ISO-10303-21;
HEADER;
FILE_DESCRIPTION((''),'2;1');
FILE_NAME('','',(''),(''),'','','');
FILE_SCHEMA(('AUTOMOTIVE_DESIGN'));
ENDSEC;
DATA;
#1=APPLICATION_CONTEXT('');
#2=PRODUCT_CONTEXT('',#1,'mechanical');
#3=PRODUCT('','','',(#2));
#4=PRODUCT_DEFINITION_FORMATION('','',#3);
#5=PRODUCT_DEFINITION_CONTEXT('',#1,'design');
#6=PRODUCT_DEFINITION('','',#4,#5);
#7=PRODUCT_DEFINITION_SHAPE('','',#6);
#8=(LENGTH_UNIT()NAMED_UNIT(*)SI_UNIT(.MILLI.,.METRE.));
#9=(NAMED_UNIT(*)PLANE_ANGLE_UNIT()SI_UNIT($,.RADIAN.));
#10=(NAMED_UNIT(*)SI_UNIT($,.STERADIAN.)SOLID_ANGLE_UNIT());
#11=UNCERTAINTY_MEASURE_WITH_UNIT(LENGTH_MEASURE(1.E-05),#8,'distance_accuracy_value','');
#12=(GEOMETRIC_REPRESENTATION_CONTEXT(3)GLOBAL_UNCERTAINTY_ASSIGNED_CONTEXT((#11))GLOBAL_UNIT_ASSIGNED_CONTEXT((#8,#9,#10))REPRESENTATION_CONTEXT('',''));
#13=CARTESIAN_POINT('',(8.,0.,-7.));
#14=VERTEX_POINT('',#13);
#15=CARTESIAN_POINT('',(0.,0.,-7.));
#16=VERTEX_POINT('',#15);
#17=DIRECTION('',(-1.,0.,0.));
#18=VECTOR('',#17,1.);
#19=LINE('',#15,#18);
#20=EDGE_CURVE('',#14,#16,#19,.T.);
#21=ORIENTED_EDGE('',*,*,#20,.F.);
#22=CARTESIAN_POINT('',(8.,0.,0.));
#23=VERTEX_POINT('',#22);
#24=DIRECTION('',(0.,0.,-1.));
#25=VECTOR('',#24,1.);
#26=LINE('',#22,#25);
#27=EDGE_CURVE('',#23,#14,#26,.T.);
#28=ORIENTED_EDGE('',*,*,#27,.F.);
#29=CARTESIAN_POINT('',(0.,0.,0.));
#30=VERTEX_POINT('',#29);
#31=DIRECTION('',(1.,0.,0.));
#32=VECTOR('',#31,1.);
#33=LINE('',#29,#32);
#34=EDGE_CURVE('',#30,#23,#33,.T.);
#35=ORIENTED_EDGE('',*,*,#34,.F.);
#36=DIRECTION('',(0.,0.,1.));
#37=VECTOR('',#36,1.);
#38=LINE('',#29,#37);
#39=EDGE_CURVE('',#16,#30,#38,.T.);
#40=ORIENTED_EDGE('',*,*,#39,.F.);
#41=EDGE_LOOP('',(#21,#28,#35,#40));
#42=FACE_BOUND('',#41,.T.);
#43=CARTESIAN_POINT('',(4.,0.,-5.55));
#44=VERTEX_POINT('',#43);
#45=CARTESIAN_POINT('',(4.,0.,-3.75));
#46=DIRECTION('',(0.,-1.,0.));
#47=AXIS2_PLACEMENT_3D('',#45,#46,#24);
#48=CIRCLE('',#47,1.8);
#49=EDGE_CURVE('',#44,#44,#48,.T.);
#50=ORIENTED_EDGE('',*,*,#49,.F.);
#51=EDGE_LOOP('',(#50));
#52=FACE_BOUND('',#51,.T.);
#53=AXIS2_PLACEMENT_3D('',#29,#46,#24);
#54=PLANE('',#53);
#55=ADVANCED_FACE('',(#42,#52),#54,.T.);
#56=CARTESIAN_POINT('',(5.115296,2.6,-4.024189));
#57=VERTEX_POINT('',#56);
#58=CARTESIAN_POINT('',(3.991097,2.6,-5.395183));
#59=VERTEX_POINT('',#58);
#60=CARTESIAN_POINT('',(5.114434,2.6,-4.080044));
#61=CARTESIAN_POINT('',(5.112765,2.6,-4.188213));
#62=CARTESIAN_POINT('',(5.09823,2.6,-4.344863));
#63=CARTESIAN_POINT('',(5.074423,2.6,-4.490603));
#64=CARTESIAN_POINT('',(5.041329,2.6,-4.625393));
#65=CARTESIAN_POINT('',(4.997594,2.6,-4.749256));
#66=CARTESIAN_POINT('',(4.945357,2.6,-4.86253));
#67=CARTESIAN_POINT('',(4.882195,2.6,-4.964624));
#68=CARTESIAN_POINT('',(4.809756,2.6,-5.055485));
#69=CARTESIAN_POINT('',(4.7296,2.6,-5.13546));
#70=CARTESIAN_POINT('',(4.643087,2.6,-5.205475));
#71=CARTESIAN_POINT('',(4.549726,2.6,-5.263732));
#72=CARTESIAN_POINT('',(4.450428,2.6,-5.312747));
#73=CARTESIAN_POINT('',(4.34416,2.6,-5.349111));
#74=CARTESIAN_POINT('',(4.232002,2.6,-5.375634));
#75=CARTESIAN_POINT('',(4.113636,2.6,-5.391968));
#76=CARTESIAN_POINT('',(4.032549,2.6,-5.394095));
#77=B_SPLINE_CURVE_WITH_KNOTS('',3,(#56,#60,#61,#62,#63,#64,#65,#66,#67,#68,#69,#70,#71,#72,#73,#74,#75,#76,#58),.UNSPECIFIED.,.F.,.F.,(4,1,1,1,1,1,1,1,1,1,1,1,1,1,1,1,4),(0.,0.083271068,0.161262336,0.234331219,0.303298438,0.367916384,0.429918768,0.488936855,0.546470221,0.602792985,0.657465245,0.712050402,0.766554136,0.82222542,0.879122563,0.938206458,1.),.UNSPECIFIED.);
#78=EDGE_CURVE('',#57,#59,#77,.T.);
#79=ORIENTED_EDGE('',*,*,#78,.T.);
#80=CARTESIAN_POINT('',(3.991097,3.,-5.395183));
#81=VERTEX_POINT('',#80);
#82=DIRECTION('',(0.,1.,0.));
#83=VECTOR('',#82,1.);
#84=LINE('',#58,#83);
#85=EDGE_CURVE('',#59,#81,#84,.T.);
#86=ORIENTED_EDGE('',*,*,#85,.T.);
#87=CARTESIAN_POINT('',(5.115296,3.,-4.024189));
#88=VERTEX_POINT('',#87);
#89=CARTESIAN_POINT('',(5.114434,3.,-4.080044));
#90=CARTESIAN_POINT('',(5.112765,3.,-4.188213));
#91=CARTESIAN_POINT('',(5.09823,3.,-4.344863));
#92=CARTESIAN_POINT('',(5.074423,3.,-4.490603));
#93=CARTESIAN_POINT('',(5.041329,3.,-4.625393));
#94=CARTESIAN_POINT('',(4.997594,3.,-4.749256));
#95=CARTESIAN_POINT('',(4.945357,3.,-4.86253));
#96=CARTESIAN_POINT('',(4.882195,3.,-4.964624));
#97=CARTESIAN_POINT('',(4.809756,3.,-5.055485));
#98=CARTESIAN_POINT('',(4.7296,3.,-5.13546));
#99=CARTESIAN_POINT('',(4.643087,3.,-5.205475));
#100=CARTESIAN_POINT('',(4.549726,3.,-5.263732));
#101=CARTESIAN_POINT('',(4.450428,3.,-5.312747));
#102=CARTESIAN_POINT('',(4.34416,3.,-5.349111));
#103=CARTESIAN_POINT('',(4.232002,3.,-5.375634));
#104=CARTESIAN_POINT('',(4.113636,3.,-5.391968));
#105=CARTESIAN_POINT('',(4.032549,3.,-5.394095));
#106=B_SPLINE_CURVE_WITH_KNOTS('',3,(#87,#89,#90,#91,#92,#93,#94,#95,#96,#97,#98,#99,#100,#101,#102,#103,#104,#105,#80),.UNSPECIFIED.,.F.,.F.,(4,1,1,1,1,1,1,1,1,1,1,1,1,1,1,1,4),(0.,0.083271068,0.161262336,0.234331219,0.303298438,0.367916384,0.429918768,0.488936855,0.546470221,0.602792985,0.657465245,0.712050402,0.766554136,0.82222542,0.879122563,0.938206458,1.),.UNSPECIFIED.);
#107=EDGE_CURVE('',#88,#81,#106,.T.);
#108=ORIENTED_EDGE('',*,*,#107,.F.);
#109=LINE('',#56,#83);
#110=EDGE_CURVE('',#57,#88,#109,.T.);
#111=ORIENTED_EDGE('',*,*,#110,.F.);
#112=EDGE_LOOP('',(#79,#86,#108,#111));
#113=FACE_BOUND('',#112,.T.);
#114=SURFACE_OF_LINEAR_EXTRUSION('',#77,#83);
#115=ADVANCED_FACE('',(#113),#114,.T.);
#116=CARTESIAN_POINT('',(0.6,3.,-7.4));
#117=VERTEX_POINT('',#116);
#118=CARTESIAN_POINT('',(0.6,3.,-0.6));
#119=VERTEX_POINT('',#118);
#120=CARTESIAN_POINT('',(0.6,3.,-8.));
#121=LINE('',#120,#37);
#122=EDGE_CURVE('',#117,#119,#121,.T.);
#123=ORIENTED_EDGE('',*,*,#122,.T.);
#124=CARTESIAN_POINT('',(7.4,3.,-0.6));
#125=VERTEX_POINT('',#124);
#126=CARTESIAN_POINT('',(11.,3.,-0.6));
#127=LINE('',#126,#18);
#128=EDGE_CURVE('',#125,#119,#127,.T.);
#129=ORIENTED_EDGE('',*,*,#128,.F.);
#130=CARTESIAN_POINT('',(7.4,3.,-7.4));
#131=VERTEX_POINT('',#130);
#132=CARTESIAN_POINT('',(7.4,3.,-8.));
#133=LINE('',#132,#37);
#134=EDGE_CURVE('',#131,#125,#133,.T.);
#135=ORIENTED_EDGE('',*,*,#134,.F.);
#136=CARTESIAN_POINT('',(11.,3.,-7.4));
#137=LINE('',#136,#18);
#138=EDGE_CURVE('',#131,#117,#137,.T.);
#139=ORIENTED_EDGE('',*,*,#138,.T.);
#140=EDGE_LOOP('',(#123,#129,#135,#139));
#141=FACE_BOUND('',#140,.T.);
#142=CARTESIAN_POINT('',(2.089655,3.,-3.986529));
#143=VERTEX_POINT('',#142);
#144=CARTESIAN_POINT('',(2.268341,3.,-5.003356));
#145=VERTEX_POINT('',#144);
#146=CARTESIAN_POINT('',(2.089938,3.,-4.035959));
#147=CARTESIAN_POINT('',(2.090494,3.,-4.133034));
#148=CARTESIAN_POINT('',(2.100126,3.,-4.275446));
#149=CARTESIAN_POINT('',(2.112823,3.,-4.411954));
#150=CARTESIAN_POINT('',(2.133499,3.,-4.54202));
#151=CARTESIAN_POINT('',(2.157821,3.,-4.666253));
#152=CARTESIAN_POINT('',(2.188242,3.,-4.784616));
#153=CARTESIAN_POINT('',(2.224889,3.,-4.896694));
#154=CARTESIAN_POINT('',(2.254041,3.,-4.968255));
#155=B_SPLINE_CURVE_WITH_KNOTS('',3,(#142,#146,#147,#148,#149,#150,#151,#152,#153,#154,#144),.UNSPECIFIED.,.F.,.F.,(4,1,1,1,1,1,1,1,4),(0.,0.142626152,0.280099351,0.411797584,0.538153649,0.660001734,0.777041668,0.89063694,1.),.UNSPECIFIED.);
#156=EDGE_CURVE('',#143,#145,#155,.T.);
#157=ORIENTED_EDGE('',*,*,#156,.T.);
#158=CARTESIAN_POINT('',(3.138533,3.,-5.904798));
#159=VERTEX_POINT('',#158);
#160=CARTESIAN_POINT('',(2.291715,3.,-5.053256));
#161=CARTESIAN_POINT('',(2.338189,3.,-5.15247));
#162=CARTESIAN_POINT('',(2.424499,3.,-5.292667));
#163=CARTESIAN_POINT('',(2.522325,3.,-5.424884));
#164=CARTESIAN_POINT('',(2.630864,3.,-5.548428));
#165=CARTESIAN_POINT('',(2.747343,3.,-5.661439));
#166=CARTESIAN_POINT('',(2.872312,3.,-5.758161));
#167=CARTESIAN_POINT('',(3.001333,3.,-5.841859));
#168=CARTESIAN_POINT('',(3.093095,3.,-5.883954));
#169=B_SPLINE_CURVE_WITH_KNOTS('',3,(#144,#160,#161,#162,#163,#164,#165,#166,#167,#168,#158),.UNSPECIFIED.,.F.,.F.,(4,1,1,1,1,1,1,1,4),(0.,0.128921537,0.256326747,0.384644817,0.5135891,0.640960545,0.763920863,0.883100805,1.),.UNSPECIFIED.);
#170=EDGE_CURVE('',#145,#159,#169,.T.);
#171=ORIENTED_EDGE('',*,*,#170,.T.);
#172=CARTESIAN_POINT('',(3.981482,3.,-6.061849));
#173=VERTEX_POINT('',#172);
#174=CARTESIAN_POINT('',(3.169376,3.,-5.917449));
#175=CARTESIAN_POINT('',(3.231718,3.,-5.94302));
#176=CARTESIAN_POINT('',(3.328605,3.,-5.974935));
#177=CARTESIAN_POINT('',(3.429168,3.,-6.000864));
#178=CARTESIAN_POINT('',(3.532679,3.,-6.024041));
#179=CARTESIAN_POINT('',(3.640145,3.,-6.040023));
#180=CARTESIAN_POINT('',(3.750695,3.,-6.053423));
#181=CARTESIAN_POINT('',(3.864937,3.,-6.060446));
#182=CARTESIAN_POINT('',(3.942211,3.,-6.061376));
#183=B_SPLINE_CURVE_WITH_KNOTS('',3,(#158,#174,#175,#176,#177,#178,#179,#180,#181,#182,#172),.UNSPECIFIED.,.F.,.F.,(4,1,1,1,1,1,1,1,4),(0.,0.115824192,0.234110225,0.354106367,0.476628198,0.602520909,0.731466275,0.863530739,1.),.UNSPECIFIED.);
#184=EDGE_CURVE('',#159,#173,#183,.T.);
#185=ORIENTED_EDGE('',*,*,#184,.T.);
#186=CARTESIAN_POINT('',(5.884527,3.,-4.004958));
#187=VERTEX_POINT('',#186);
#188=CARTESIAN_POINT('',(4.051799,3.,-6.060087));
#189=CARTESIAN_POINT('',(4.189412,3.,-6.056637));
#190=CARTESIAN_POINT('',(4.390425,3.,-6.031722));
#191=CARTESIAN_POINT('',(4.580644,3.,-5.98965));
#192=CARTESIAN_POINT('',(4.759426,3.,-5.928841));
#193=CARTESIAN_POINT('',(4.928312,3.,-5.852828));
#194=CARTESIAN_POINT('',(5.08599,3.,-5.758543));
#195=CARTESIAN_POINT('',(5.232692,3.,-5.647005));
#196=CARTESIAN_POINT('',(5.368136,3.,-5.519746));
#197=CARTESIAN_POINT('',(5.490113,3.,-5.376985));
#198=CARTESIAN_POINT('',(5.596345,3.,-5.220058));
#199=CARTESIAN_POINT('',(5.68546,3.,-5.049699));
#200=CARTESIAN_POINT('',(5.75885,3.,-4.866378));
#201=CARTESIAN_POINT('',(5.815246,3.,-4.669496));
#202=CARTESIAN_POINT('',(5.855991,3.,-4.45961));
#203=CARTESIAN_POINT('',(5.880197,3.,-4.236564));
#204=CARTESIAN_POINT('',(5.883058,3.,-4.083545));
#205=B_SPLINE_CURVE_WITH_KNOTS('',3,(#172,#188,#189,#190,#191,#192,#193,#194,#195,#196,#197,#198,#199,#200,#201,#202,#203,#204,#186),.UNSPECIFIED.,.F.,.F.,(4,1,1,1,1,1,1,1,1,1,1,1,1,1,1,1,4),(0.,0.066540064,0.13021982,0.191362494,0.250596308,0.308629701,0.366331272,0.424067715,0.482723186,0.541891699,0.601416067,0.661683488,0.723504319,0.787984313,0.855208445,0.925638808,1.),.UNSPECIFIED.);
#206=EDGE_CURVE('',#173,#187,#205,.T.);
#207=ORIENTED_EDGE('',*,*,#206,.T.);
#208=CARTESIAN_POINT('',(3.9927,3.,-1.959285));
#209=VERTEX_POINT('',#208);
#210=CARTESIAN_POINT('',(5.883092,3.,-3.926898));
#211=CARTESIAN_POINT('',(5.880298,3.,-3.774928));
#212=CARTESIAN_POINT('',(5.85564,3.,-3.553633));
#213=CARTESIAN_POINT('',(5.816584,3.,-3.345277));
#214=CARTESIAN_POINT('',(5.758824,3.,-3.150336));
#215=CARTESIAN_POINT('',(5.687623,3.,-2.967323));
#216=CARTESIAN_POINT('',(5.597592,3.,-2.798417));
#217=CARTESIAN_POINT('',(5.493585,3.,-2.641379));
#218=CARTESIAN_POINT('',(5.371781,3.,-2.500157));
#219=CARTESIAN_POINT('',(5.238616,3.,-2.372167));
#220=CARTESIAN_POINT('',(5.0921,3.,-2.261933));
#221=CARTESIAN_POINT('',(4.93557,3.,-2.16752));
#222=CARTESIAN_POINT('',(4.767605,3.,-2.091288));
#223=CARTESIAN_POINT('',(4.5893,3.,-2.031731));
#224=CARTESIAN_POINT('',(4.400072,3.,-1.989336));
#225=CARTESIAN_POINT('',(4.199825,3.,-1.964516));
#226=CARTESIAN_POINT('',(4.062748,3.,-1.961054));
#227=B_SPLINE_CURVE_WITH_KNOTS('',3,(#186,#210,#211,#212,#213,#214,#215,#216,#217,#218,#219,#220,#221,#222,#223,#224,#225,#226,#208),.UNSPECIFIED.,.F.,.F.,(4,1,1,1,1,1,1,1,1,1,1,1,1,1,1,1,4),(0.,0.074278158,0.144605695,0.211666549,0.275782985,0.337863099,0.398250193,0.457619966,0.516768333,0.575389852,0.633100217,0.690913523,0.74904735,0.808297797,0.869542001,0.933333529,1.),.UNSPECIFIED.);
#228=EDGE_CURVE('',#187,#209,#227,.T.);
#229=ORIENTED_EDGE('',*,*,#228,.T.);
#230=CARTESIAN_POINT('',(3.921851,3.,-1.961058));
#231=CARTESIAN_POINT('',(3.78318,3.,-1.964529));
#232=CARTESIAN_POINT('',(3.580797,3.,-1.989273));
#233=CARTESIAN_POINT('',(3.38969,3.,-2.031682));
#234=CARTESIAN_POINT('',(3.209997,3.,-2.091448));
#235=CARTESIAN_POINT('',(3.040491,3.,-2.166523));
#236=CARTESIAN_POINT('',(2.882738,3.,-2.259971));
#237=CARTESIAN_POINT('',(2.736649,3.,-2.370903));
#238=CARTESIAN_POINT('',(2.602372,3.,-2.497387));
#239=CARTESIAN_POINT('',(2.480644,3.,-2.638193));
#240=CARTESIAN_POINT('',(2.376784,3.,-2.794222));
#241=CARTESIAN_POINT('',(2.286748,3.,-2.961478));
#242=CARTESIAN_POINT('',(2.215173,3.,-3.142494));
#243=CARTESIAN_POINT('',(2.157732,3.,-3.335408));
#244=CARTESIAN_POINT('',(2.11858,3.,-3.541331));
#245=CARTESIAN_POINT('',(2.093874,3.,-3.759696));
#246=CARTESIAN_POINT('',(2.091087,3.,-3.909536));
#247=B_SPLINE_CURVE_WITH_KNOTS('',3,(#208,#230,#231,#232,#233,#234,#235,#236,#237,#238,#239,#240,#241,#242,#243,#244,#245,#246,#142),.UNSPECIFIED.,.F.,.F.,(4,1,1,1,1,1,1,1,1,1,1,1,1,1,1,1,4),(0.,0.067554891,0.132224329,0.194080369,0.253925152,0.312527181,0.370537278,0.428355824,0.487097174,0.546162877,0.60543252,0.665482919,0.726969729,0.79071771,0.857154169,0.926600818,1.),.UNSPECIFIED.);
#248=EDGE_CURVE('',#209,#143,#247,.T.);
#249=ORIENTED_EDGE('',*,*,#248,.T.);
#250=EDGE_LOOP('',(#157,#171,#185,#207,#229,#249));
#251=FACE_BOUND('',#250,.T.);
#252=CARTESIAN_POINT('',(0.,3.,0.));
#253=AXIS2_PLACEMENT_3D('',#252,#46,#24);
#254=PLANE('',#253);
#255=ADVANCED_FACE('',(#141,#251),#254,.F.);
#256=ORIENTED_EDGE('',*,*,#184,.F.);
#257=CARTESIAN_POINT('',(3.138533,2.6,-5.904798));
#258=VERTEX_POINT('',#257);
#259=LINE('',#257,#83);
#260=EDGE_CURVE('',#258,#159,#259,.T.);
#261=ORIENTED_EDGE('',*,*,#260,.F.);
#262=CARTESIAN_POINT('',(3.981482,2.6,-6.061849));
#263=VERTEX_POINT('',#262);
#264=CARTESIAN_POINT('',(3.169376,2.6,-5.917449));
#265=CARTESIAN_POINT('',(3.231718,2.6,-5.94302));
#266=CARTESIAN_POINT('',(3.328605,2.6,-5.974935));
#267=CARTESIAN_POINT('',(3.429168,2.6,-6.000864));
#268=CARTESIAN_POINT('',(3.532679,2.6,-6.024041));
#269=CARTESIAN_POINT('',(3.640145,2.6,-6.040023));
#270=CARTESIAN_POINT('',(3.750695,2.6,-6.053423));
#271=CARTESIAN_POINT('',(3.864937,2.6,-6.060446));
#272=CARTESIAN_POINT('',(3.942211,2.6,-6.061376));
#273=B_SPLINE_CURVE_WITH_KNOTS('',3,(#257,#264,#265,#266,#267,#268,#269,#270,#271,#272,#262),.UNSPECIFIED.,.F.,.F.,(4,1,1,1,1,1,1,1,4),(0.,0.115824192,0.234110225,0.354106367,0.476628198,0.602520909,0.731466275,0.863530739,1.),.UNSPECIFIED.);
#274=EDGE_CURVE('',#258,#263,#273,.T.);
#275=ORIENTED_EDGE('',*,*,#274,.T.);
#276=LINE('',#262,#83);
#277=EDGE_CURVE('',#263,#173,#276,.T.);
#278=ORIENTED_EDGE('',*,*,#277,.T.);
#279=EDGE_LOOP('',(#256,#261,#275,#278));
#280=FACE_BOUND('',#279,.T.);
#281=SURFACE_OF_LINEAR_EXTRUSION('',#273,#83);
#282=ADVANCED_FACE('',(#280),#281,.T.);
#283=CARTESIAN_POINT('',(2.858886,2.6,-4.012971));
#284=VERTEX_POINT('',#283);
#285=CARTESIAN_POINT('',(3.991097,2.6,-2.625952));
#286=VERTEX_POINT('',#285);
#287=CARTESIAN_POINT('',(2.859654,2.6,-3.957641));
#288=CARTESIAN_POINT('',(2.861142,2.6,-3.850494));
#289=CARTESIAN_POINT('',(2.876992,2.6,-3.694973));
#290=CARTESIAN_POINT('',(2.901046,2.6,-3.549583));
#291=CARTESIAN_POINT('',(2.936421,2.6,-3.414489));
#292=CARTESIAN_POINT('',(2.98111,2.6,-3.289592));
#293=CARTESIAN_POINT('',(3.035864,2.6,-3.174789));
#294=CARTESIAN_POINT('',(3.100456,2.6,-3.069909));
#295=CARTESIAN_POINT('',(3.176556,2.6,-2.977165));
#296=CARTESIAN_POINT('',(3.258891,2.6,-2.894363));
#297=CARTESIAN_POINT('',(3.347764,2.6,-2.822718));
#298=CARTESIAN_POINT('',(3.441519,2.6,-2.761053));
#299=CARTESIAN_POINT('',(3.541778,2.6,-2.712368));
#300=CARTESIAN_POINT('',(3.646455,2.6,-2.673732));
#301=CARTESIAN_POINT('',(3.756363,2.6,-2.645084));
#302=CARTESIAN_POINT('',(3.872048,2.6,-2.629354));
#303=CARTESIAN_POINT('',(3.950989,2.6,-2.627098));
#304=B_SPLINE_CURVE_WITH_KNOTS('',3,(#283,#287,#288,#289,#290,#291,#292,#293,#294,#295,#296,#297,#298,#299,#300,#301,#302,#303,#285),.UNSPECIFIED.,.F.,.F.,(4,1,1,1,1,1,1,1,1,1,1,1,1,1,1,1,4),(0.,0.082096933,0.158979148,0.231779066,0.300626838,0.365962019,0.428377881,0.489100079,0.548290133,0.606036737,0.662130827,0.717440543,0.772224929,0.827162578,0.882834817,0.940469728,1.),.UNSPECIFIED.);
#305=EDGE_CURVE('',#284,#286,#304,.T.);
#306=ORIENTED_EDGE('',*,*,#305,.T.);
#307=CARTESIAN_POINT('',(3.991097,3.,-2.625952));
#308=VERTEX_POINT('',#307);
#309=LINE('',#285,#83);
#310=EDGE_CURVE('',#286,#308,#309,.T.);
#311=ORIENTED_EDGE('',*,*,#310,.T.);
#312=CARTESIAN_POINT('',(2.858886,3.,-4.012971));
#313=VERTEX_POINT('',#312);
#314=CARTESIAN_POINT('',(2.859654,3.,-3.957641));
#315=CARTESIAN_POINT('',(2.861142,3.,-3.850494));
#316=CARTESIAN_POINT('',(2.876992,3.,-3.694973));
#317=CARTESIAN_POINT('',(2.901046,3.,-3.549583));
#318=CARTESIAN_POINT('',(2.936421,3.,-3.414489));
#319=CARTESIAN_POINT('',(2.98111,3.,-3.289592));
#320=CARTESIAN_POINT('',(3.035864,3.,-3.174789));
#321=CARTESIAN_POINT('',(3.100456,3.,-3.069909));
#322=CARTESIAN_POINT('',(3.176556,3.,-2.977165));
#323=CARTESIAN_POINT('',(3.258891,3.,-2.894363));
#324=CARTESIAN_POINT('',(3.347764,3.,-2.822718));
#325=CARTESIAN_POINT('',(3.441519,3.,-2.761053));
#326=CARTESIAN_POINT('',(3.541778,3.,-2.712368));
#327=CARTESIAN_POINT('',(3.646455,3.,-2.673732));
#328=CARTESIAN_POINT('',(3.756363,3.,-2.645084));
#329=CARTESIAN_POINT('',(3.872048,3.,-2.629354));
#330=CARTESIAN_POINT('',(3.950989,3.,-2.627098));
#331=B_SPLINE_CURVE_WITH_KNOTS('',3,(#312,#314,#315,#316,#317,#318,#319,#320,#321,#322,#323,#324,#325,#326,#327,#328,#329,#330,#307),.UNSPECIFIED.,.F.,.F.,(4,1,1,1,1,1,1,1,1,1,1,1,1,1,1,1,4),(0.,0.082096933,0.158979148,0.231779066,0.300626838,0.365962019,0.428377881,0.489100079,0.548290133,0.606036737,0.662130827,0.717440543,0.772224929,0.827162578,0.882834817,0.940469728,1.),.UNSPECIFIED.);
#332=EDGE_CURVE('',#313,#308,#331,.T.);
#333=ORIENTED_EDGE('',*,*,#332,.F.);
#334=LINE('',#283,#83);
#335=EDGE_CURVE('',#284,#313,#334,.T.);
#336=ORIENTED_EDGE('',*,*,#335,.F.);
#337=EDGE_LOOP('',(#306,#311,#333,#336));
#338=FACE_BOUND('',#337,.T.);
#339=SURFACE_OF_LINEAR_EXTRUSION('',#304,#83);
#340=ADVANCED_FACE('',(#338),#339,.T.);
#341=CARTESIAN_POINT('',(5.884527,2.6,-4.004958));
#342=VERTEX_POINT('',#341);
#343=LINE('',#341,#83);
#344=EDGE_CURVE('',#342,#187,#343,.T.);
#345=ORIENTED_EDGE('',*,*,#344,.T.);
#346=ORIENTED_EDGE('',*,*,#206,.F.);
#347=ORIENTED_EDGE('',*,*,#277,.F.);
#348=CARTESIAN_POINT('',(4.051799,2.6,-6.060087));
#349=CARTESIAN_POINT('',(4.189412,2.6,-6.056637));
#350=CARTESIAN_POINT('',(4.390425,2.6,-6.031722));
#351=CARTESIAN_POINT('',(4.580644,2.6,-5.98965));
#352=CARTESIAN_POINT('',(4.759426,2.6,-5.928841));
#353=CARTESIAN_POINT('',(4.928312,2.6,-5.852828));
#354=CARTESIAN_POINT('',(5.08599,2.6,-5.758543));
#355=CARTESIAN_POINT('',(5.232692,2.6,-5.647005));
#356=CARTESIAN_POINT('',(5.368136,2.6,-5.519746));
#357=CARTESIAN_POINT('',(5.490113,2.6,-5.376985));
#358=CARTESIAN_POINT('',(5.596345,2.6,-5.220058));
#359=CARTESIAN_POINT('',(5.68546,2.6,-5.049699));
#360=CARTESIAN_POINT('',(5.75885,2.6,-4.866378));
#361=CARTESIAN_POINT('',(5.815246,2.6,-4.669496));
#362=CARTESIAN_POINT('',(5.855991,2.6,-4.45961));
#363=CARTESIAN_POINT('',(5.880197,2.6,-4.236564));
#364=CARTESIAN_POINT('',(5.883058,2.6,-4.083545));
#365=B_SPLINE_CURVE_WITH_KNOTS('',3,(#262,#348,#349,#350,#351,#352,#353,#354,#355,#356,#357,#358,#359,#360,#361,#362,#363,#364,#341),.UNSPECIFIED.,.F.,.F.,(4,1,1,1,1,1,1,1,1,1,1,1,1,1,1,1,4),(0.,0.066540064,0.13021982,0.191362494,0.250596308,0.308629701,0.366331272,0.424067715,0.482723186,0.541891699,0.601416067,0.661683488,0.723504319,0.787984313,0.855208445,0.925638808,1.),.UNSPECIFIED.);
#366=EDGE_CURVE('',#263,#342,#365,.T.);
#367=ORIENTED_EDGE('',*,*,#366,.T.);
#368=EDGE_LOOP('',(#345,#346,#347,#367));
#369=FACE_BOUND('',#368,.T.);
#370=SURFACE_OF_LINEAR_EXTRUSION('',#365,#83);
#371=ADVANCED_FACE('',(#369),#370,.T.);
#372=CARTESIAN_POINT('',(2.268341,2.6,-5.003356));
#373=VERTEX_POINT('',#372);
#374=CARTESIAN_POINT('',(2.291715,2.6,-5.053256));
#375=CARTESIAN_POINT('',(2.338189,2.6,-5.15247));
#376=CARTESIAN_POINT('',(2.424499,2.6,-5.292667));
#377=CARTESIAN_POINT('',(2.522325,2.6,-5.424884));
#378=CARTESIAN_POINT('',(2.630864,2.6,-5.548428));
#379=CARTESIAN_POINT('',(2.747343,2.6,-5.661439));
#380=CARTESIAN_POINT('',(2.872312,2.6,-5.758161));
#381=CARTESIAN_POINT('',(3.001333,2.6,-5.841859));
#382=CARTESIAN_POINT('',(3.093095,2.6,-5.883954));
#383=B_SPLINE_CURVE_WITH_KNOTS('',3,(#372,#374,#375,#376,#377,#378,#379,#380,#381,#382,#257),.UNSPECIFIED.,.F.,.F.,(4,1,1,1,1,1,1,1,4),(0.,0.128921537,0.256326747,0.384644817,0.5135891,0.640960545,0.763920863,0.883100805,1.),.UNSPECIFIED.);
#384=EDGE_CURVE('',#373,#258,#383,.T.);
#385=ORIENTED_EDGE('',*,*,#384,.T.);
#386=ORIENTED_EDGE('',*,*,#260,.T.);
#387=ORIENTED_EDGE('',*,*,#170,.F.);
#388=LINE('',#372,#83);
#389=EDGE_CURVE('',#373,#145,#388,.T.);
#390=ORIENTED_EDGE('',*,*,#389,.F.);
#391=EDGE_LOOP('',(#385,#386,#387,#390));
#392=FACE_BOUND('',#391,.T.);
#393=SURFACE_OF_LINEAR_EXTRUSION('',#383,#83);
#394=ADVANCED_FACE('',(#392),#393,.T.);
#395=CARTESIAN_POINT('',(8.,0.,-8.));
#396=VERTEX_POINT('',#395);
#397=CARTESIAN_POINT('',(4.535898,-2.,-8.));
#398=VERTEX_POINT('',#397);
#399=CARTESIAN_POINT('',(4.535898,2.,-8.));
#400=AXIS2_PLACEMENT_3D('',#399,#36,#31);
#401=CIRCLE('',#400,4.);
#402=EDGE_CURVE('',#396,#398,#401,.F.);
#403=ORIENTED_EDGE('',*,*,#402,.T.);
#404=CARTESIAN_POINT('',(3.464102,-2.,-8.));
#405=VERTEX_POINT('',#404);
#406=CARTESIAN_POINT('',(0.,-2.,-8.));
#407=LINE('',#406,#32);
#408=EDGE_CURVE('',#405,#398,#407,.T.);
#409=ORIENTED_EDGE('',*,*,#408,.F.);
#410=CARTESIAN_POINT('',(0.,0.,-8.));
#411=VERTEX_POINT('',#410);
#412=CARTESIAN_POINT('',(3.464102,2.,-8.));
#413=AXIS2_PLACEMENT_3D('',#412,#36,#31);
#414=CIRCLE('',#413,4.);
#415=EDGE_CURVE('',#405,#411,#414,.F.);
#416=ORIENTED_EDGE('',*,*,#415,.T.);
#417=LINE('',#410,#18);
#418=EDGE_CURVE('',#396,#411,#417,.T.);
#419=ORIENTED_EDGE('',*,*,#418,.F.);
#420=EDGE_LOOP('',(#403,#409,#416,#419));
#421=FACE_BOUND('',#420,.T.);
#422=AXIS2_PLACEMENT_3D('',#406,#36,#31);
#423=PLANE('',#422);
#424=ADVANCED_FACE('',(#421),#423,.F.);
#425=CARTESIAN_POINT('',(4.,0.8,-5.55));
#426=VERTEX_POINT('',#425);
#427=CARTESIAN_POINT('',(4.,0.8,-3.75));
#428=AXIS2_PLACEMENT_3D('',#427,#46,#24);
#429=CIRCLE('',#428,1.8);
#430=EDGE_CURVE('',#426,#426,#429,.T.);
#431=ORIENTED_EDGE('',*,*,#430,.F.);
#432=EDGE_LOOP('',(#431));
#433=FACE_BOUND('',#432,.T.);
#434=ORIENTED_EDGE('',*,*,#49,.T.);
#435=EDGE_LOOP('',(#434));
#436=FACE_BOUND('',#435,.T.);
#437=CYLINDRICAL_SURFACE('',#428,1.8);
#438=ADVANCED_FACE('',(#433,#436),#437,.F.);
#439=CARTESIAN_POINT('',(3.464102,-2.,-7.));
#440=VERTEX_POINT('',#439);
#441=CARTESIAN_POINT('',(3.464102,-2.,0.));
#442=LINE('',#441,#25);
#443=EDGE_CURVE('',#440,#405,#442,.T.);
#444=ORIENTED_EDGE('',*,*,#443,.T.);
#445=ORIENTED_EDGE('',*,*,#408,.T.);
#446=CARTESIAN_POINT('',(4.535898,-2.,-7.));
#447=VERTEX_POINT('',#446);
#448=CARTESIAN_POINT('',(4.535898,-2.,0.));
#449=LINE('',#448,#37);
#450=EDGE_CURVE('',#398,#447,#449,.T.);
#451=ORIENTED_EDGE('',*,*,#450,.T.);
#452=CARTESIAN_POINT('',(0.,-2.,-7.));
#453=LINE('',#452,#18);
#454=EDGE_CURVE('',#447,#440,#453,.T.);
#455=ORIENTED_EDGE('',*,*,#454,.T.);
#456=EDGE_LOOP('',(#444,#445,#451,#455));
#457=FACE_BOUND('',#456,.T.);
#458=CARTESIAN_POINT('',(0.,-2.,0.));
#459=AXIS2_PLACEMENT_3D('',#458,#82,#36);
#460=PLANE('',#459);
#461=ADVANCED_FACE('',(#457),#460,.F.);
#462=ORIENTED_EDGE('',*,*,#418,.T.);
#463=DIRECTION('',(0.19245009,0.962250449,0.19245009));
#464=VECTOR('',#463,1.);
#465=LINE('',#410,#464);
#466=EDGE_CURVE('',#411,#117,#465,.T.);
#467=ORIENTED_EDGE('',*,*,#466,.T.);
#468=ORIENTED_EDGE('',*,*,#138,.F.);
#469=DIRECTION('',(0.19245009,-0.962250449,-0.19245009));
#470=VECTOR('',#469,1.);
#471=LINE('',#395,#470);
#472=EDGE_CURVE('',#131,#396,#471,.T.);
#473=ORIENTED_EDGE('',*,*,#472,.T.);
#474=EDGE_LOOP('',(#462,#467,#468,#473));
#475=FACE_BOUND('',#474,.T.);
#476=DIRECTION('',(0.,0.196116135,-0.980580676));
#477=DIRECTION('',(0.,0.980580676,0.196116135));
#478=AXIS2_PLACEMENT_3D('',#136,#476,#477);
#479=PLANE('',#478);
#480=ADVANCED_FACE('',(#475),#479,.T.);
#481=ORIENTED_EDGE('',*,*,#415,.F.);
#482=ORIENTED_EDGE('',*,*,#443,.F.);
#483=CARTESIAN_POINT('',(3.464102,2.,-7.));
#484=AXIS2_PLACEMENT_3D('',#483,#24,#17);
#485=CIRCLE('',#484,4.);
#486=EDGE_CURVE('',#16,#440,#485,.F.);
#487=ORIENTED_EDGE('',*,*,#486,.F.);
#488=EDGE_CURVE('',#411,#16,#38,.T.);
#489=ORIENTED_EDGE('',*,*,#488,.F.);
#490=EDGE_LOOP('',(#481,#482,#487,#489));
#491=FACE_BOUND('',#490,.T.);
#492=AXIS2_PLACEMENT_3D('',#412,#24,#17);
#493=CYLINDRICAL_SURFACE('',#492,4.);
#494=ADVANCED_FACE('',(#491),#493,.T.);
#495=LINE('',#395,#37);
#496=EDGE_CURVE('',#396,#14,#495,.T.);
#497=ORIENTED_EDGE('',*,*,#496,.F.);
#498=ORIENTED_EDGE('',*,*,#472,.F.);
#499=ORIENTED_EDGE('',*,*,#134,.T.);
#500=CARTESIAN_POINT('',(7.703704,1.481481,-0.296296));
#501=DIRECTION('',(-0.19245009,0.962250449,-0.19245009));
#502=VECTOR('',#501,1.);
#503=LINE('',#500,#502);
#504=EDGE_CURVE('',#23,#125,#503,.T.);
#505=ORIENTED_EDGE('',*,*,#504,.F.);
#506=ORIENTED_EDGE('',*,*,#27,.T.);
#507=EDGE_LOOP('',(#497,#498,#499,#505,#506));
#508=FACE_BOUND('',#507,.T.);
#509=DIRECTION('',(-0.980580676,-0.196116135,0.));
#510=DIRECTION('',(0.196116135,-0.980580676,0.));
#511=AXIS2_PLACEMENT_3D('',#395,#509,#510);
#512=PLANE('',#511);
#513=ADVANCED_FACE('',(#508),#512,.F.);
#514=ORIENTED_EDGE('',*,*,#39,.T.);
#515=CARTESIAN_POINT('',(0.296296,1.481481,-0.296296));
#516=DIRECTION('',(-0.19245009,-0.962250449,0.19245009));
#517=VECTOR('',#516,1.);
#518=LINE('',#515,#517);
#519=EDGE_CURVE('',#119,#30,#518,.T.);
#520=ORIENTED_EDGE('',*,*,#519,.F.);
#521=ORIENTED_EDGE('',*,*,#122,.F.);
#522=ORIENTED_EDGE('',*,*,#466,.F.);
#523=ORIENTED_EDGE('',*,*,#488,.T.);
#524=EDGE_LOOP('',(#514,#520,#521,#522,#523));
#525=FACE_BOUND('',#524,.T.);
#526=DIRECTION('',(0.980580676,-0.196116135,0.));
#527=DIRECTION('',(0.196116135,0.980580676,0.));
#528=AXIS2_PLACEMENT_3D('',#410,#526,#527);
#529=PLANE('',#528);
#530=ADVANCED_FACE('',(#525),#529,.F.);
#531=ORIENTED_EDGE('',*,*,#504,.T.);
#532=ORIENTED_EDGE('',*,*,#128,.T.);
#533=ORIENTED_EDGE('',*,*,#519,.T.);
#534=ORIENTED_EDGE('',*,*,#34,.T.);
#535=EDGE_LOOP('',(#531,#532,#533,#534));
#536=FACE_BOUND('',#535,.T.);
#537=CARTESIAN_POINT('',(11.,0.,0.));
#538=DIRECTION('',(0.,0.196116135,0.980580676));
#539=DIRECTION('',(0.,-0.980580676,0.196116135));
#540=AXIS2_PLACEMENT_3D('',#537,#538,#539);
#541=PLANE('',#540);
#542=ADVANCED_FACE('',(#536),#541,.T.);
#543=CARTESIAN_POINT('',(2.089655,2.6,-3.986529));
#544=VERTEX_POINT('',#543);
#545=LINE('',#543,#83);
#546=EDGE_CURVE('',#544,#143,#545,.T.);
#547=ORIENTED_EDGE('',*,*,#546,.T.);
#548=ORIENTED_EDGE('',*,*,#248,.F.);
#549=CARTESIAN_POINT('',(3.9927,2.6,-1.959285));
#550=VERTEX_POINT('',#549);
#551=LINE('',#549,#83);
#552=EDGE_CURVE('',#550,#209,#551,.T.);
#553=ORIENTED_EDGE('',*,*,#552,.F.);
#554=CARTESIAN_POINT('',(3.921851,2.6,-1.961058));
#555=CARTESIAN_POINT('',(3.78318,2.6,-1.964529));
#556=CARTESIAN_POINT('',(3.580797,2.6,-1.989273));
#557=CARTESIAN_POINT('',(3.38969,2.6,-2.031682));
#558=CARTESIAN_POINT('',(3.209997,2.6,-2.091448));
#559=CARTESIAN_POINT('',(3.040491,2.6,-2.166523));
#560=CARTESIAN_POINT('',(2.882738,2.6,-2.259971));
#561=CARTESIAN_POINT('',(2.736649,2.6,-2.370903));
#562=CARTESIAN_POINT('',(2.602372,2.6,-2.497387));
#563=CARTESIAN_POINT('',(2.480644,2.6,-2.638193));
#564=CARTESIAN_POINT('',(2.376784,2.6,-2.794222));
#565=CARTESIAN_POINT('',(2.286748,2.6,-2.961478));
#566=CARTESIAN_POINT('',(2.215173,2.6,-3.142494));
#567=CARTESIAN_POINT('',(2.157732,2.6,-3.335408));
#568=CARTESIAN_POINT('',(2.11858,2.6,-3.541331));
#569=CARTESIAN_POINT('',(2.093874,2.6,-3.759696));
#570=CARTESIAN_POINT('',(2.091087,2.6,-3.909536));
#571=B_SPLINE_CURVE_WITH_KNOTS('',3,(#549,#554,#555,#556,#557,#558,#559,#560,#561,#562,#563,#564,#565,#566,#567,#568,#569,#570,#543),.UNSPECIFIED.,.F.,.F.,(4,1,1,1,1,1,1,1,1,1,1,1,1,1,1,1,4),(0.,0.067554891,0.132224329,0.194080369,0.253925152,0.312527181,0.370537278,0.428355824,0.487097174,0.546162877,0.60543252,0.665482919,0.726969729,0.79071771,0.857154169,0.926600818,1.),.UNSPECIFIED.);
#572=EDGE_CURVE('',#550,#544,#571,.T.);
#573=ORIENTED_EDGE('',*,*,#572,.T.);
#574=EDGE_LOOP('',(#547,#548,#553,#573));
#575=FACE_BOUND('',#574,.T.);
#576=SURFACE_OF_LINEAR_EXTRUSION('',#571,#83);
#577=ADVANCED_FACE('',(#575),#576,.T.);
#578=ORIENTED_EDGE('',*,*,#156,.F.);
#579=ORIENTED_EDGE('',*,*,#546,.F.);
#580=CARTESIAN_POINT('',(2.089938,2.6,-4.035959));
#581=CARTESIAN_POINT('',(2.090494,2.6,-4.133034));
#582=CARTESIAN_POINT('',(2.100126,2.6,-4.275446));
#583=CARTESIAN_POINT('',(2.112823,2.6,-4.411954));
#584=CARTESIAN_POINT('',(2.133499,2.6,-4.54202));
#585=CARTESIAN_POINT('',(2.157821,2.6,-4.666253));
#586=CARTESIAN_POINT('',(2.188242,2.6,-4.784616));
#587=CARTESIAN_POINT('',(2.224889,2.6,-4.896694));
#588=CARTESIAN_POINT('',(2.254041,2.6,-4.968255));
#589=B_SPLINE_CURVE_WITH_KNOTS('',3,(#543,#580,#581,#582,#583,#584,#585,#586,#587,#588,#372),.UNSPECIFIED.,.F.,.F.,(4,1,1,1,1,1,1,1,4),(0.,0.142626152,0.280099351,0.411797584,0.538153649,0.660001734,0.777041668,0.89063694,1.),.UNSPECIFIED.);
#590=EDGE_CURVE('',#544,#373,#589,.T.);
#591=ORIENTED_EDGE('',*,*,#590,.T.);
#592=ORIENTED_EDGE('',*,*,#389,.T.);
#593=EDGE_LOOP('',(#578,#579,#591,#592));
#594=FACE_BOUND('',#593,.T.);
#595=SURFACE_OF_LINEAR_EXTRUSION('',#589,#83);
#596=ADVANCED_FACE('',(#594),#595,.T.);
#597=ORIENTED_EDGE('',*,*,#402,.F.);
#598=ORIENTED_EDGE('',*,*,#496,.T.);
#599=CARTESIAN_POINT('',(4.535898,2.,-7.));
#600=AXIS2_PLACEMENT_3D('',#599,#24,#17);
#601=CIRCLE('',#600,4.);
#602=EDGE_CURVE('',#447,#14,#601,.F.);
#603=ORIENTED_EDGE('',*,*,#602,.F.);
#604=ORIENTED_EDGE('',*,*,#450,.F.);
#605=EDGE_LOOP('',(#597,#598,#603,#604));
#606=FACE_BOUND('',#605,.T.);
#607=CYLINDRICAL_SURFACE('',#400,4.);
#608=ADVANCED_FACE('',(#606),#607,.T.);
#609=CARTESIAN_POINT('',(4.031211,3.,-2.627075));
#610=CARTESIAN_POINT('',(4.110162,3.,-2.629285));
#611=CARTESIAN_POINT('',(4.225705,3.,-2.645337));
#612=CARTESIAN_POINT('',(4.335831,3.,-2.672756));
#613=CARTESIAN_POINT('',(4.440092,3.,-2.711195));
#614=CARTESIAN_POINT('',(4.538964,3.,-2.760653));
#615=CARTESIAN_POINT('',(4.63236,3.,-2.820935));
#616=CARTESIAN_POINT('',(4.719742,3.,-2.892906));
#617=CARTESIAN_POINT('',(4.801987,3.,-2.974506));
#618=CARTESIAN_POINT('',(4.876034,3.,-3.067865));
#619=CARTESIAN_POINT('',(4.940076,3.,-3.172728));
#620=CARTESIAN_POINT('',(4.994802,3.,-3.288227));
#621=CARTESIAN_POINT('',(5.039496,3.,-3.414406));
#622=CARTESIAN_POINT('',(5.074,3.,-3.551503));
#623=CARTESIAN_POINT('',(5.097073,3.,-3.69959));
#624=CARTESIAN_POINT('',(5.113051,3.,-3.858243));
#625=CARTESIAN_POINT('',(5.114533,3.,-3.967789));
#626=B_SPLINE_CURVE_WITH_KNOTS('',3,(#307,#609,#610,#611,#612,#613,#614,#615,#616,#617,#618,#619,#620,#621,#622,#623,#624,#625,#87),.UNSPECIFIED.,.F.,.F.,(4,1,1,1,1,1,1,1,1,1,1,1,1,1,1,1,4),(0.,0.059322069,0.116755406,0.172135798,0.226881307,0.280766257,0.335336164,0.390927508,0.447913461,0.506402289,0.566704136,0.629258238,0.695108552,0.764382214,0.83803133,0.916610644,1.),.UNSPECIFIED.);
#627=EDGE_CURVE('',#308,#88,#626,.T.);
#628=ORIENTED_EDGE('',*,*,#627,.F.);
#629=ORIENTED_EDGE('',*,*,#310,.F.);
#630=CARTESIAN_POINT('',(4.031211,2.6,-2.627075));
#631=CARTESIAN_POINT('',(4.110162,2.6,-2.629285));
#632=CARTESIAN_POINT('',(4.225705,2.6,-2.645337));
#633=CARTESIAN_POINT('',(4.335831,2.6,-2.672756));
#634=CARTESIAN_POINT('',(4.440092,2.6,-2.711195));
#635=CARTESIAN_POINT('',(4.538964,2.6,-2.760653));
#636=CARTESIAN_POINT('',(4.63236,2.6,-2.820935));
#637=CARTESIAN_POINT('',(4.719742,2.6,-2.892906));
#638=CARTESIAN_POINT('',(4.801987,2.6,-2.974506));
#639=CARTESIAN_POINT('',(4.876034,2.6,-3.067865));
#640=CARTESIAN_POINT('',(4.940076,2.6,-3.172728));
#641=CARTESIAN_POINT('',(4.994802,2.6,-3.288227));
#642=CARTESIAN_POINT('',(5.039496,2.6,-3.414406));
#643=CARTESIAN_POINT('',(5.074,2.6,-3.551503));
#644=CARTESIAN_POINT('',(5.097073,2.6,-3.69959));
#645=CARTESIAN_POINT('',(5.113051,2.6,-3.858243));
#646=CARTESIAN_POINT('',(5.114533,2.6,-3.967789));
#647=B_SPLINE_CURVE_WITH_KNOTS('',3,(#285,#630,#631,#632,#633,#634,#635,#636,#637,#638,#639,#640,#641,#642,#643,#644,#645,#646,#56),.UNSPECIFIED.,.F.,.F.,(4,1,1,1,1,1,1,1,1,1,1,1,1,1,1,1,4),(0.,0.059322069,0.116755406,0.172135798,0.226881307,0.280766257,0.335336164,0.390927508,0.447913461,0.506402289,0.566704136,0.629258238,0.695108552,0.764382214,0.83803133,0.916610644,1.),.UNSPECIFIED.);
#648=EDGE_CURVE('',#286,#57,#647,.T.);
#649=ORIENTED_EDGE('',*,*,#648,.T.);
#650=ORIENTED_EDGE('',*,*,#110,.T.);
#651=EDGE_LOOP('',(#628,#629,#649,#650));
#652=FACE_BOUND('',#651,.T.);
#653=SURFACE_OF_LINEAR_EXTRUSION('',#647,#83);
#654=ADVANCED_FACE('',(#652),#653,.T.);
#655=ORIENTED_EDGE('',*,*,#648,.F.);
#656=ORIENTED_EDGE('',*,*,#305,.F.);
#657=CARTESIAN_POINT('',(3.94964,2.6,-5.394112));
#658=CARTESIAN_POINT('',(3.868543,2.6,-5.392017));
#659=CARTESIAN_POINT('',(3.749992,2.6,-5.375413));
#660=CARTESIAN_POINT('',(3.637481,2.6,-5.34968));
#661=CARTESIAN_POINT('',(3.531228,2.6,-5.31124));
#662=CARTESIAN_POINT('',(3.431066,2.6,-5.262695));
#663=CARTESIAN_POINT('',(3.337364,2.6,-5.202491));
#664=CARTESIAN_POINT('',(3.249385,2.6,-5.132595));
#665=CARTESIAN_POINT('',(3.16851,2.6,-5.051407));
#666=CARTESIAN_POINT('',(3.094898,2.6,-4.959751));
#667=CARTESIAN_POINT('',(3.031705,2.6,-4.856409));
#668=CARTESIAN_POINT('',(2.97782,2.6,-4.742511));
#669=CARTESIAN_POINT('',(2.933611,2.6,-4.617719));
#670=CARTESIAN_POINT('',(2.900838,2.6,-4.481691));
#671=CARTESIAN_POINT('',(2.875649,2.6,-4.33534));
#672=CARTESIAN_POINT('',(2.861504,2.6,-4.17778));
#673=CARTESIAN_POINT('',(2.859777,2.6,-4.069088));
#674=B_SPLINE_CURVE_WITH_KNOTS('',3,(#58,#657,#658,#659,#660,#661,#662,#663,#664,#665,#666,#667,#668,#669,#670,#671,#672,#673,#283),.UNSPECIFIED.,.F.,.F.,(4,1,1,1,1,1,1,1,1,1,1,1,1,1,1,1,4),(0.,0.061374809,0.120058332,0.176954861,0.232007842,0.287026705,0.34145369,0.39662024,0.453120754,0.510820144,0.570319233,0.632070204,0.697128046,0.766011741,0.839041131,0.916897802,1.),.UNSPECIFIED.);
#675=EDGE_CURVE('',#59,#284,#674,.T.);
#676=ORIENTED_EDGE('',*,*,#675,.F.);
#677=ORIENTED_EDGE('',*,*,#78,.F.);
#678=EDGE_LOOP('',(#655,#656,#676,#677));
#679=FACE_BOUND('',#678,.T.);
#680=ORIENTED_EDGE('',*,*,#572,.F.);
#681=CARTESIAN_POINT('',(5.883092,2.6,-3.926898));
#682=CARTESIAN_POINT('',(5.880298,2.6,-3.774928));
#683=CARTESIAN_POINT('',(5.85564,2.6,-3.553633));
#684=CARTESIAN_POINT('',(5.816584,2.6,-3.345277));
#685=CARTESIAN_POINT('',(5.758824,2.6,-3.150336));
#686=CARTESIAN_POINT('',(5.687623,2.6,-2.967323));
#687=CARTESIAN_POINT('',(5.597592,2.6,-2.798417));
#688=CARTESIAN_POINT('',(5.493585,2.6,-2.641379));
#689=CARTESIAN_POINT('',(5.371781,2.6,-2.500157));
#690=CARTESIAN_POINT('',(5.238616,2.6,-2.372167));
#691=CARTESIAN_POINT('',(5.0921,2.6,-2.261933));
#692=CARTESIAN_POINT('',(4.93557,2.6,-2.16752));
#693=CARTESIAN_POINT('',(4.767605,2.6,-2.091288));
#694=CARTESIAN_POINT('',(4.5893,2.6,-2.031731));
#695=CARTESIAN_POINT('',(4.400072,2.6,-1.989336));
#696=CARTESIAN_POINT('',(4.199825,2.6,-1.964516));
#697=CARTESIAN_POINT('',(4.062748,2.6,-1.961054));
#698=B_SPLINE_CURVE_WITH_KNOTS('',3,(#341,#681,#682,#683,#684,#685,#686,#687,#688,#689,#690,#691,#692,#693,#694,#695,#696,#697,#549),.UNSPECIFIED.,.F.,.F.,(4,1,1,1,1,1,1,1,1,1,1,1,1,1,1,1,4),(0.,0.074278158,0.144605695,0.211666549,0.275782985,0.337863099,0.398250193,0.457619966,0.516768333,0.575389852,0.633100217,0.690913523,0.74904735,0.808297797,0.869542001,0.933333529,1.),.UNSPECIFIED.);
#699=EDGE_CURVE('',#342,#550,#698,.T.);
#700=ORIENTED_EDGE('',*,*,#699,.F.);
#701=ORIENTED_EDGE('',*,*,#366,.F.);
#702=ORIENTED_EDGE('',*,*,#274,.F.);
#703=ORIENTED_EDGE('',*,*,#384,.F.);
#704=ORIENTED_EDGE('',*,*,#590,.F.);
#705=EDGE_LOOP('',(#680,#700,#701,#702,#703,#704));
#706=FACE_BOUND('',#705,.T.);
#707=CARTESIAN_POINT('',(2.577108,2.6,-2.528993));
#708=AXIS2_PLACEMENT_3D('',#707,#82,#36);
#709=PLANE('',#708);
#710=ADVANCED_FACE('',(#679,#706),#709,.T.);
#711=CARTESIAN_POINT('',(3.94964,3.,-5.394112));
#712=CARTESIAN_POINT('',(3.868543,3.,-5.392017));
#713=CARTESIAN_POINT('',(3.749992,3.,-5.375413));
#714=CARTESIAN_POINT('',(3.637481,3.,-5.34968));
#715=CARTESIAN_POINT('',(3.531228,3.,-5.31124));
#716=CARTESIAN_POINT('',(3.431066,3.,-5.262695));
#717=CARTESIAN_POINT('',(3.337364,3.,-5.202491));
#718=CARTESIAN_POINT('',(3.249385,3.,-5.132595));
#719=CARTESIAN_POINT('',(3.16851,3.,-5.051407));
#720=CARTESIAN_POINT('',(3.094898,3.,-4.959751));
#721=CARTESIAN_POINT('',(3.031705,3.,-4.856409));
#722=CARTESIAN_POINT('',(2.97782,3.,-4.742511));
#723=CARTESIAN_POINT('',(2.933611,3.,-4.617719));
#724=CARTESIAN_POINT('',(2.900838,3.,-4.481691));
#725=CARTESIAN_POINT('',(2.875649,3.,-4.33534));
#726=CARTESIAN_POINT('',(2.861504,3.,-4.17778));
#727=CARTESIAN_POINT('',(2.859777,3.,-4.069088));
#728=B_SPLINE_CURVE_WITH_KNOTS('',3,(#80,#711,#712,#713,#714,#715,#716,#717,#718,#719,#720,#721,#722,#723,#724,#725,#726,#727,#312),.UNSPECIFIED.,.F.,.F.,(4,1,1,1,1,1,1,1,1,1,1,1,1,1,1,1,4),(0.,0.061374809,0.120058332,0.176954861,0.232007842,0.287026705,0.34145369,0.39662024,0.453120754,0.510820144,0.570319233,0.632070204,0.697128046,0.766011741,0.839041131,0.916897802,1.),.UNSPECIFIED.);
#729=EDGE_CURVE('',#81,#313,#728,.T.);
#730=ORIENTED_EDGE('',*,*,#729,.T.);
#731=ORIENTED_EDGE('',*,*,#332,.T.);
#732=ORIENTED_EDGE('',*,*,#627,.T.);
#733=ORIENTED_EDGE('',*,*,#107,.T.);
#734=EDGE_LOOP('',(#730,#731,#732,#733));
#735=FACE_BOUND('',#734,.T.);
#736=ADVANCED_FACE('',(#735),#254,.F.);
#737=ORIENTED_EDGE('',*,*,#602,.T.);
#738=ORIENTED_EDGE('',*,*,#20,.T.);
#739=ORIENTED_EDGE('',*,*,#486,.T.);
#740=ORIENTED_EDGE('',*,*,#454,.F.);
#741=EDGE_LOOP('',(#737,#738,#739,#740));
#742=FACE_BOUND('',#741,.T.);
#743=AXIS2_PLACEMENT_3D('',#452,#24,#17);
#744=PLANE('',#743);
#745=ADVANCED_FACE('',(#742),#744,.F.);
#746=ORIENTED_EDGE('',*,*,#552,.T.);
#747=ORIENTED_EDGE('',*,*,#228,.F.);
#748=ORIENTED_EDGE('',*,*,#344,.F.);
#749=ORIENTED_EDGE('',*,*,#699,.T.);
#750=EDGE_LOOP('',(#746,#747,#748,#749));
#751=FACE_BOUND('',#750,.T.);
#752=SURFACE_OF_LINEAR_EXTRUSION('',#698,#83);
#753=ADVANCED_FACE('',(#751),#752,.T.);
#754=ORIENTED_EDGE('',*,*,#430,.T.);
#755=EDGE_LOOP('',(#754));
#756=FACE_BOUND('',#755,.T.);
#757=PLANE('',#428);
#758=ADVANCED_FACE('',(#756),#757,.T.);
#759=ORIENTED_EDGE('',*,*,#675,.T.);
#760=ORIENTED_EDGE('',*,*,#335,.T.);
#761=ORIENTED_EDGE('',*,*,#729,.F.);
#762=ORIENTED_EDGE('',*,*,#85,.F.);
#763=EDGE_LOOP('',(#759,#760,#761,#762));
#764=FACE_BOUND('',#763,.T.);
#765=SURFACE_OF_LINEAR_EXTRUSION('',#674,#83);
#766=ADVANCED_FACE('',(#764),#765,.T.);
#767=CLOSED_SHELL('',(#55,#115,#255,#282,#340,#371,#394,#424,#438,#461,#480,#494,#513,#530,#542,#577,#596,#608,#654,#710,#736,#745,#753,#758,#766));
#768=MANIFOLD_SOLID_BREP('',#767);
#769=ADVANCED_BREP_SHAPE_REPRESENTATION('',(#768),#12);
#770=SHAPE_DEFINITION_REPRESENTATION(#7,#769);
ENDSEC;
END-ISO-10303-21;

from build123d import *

# Parameters (mm, degrees)
SKETCH1_W               = 8
SKETCH1_H               = 8
BOSS_EXTRUDE1_DEPTH     = 3
CUT_EXTRUDE1_DEPTH      = 12.704699911
CUT_EXTRUDE1_DEPTH_BACK = 12.704699911
CUT_EXTRUDE2_DEPTH      = 11
SKETCH4_R               = 1.8
CUT_EXTRUDE3_DEPTH      = 0.8
SKETCH5_W               = 8
SKETCH5_H               = 1
BOSS_EXTRUDE2_DEPTH     = 2
FILLET1_R               = 4
CUT_EXTRUDE4_DEPTH      = 0.4


with BuildPart() as part:
    # Sketch1 → Boss-Extrude1 (new body)
    with BuildSketch(Plane(origin=(0, 0, 0), x_dir=(1, 0, 0), z_dir=(0, 1, 0))):
        with Locations((4, 4)):
            Rectangle(SKETCH1_W, SKETCH1_H)
    extrude(amount=BOSS_EXTRUDE1_DEPTH)

    # Sketch2 → Cut-Extrude1 (cut, two sides: drawn at the far end of the back side and taken through both)
    with BuildSketch(Plane.XY.offset(-CUT_EXTRUDE1_DEPTH_BACK)):
        Polygon((0, 0), (0.6, 3), (0, 3), align=None)
        Polygon((8, 0), (7.4, 3), (8, 3), align=None)
    extrude(amount=CUT_EXTRUDE1_DEPTH + CUT_EXTRUDE1_DEPTH_BACK, mode=Mode.SUBTRACT)

    # Sketch3 → Cut-Extrude2 (cut)
    with BuildSketch(Plane(origin=(0, 0, 0), x_dir=(0, 0, -1), z_dir=(1, 0, 0))):
        Polygon((0, 0), (0.6, 3), (0, 3), align=None)
        Polygon((8, 3), (7.4, 3), (8, 0), align=None)
    extrude(amount=CUT_EXTRUDE2_DEPTH, mode=Mode.SUBTRACT)

    # Sketch4 → Cut-Extrude3 (cut)
    with BuildSketch(Plane.XZ):
        with Locations(Location((4, -3.75, 0), (0, 0, 270))):
            Circle(SKETCH4_R)
    extrude(amount=-CUT_EXTRUDE3_DEPTH, mode=Mode.SUBTRACT)

    # Sketch5 → Boss-Extrude2 (add)
    with BuildSketch(Plane.XZ):
        with Locations((4, -7.5)):
            Rectangle(SKETCH5_W, SKETCH5_H)
    extrude(amount=BOSS_EXTRUDE2_DEPTH)

    # Fillet1
    # the kernel refuses this fillet: 4 mm, written as the material it takes off along each edge
    with BuildSketch(Plane(origin=(8, -2, -16.660254038), x_dir=(0, 1, 0), z_dir=(0, 0, 1)), Plane(origin=(0, -2, 1.660254038), x_dir=(0, 1, 0), z_dir=(0, 0, -1))) as fillet1_piece_1:
        with BuildLine():
            CenterArc((4, 3.464101615), FILLET1_R, 180, 60)
            Line((0, 3.464101615), (-0.08, 3.464101615))
            Line((-0.08, 3.464101615), (-0.08, 0))
            Line((-0.08, 0), (0, -0.08))
            ThreePointArc((0, -0.08), (1, -0.08), (1.96, -0.069282032))
            Line((1.96, -0.069282032), (2, 0))
        make_face()
    extrude(amount=18.320508076, mode=Mode.SUBTRACT)

    # Sketch6 → Cut-Extrude4 (cut)
    with BuildSketch(Plane(origin=(0, 3, 0), x_dir=(1, 0, 0), z_dir=(0, 1, 0))):
        with BuildLine():
            add(Edge.make_bspline(
                [(2.089654898, 3.986528763), (2.089937962, 4.035959112), (2.090493863, 4.133033938), (2.100126328, 4.27544635), (2.112822668, 4.411953966), (2.133498637, 4.542019848), (2.157821125, 4.666252751), (2.188242102, 4.784615798), (2.224888607, 4.896693893), (2.254041192, 4.968254545), (2.268340796, 5.003355686)],
                knots=[0, 0, 0, 0, 1.141009212, 2.240794809, 3.294380675, 4.305229195, 5.280013876, 6.216333343, 7.125095522, 8, 8, 8, 8], degree=3))
            add(Edge.make_bspline(
                [(2.268340796, 5.003355686), (2.291715222, 5.053256024), (2.338189152, 5.15246979), (2.424498545, 5.292666818), (2.522325153, 5.424883974), (2.630863596, 5.548428123), (2.747342854, 5.661439376), (2.872312421, 5.758160736), (3.001332505, 5.841858689), (3.093095075, 5.883953785), (3.138533104, 5.904797994)],
                knots=[0, 0, 0, 0, 1.031372299, 2.050613973, 3.077158538, 4.108712802, 5.127684358, 6.111366908, 7.06480644, 8, 8, 8, 8], degree=3))
            add(Edge.make_bspline(
                [(3.138533104, 5.904797994), (3.169376267, 5.917449171), (3.231718165, 5.943020427), (3.328604813, 5.974934694), (3.429167615, 6.000863593), (3.532679205, 6.024041008), (3.640144595, 6.040022598), (3.750695421, 6.053422612), (3.864936689, 6.060445793), (3.94221093, 6.06137636), (3.981481822, 6.061849276)],
                knots=[0, 0, 0, 0, 0.92659354, 1.872881803, 2.832850937, 3.813025581, 4.820167273, 5.851730198, 6.908245912, 8, 8, 8, 8], degree=3))
            add(Edge.make_bspline(
                [(3.981481822, 6.061849276), (4.051799393, 6.060086645), (4.189411847, 6.056637153), (4.390424999, 6.03172188), (4.580644474, 5.989650147), (4.759426374, 5.9288409), (4.928312103, 5.852828021), (5.085989518, 5.7585427), (5.232691986, 5.647005393), (5.368136158, 5.519745635), (5.490113336, 5.376985207), (5.596345325, 5.220057705), (5.685459602, 5.049698506), (5.758850354, 4.866377637), (5.815245616, 4.669496317), (5.855991141, 4.459610063), (5.880197281, 4.23656428), (5.883057671, 4.083544992), (5.884526693, 4.00495825)],
                knots=[0, 0, 0, 0, 1.064641025, 2.083517118, 3.061799897, 4.009540929, 4.938075217, 5.861300345, 6.78508344, 7.723570974, 8.670267188, 9.622657076, 10.586935816, 11.576069104, 12.607749008, 13.683335114, 14.81022093, 16, 16, 16, 16], degree=3))
            add(Edge.make_bspline(
                [(5.884526693, 4.00495825), (5.883091601, 3.926897736), (5.880297745, 3.774928499), (5.855639782, 3.553632965), (5.816583507, 3.345276789), (5.758823703, 3.150335932), (5.687623357, 2.967322864), (5.597592073, 2.798417418), (5.493584902, 2.641379175), (5.37178097, 2.500157102), (5.2386164, 2.372167), (5.092100017, 2.261933284), (4.935570416, 2.167520211), (4.767605484, 2.091287667), (4.589299985, 2.031730764), (4.400072033, 1.989335741), (4.199824576, 1.964516346), (4.062748303, 1.961054329), (3.99269977, 1.959285173)],
                knots=[0, 0, 0, 0, 1.18845052, 2.313691126, 3.386664782, 4.412527756, 5.405809582, 6.372003093, 7.321919452, 8.268293321, 9.206237639, 10.129603466, 11.054616372, 11.9847576, 12.932764752, 13.912672021, 14.933336461, 16, 16, 16, 16], degree=3))
            add(Edge.make_bspline(
                [(3.99269977, 1.959285173), (3.921851099, 1.961058411), (3.783179897, 1.964529147), (3.580796614, 1.989272994), (3.389690252, 2.031681973), (3.209996896, 2.091448367), (3.040491004, 2.166522847), (2.882737558, 2.259971154), (2.736649357, 2.370903), (2.60237212, 2.497386547), (2.480643503, 2.638193424), (2.376784009, 2.794221956), (2.286748029, 2.961477617), (2.215173347, 3.142493932), (2.157731606, 3.335408473), (2.118579893, 3.541331287), (2.09387425, 3.75969562), (2.091087056, 3.909535694), (2.089654898, 3.986528763)],
                knots=[0, 0, 0, 0, 1.080878253, 2.11558926, 3.1052859, 4.062802436, 5.000434901, 5.928596448, 6.853693179, 7.793554778, 8.738606028, 9.68692032, 10.647726704, 11.63151566, 12.651483354, 13.714466703, 14.825613081, 16, 16, 16, 16], degree=3))
        make_face()
        with BuildLine():
            add(Edge.make_bspline(
                [(2.858885668, 4.012971071), (2.85965412, 3.957640503), (2.861142212, 3.850493912), (2.876992368, 3.694973228), (2.901046254, 3.549583199), (2.936421027, 3.414488839), (2.98111032, 3.289592419), (3.035863968, 3.174789463), (3.100455695, 3.069908984), (3.176556171, 2.977165157), (3.258890919, 2.894362796), (3.347763935, 2.822717871), (3.441518937, 2.761052648), (3.541778172, 2.712368162), (3.646455066, 2.673731696), (3.756362885, 2.645084172), (3.872048117, 2.629353868), (3.950988508, 2.627098013), (3.991097206, 2.62595184)],
                knots=[0, 0, 0, 0, 1.313550922, 2.543666373, 3.708465049, 4.810029406, 5.85539231, 6.85404609, 7.825601258, 8.772642133, 9.696587791, 10.59409323, 11.479048685, 12.35559886, 13.234601248, 14.125357077, 15.047515647, 16, 16, 16, 16], degree=3))
            add(Edge.make_bspline(
                [(3.991097206, 2.62595184), (4.031211308, 2.62707479), (4.110162334, 2.629284937), (4.225705423, 2.645336869), (4.335831051, 2.6727565), (4.440092094, 2.711194976), (4.538963761, 2.760652512), (4.632359934, 2.820935331), (4.719742254, 2.892906209), (4.801987382, 2.974505658), (4.876033724, 3.06786548), (4.940075505, 3.17272786), (4.994802176, 3.288227099), (5.039496175, 3.414406406), (5.074000367, 3.551503186), (5.097072556, 3.699589977), (5.113050883, 3.858243352), (5.114532906, 3.967789388), (5.115295924, 4.02418902)],
                knots=[0, 0, 0, 0, 0.949153107, 1.868086493, 2.754172764, 3.630100905, 4.492260106, 5.365378617, 6.254840125, 7.166615376, 8.102436631, 9.067266169, 10.06813181, 11.121736829, 12.23011542, 13.408501285, 14.665770308, 16, 16, 16, 16], degree=3))
            add(Edge.make_bspline(
                [(5.115295924, 4.02418902), (5.114434086, 4.080044083), (5.112765054, 4.18821272), (5.098229512, 4.344863246), (5.07442298, 4.490602534), (5.041329269, 4.625392829), (4.997593851, 4.74925585), (4.945357013, 4.862530314), (4.882195257, 4.964624424), (4.809756461, 5.055485317), (4.729599598, 5.135460421), (4.643086506, 5.205475199), (4.549725647, 5.26373175), (4.45042821, 5.312746734), (4.344160403, 5.349110772), (4.232002157, 5.375634395), (4.113636071, 5.391967682), (4.032549387, 5.394095071), (3.991097206, 5.395182609)],
                knots=[0, 0, 0, 0, 1.332337092, 2.580197383, 3.749299508, 4.852775005, 5.886662144, 6.878700295, 7.822989687, 8.743523536, 9.644687758, 10.519443927, 11.392806431, 12.264866173, 13.155606721, 14.065961015, 15.011303331, 16, 16, 16, 16], degree=3))
            add(Edge.make_bspline(
                [(3.991097206, 5.395182609), (3.949639786, 5.394111799), (3.868542852, 5.392017134), (3.749992261, 5.375413426), (3.637480681, 5.349680139), (3.531227894, 5.311239711), (3.431065544, 5.262695426), (3.337364104, 5.202490837), (3.249385236, 5.13259488), (3.168510191, 5.05140717), (3.094897659, 4.95975062), (3.031705485, 4.856409024), (2.977820274, 4.742511001), (2.933610582, 4.617719403), (2.900837529, 4.481690937), (2.87564871, 4.335339795), (2.861503604, 4.177780175), (2.859777069, 4.069088169), (2.858885668, 4.012971071)],
                knots=[0, 0, 0, 0, 0.981996942, 1.920933313, 2.83127778, 3.712125466, 4.592427284, 5.463259035, 6.34592384, 7.249932058, 8.173122297, 9.125107726, 10.113123258, 11.154048744, 12.256187849, 13.424658091, 14.670364834, 16, 16, 16, 16], degree=3))
        make_face(mode=Mode.SUBTRACT)
    extrude(amount=-CUT_EXTRUDE4_DEPTH, mode=Mode.SUBTRACT)


solid = part.part
